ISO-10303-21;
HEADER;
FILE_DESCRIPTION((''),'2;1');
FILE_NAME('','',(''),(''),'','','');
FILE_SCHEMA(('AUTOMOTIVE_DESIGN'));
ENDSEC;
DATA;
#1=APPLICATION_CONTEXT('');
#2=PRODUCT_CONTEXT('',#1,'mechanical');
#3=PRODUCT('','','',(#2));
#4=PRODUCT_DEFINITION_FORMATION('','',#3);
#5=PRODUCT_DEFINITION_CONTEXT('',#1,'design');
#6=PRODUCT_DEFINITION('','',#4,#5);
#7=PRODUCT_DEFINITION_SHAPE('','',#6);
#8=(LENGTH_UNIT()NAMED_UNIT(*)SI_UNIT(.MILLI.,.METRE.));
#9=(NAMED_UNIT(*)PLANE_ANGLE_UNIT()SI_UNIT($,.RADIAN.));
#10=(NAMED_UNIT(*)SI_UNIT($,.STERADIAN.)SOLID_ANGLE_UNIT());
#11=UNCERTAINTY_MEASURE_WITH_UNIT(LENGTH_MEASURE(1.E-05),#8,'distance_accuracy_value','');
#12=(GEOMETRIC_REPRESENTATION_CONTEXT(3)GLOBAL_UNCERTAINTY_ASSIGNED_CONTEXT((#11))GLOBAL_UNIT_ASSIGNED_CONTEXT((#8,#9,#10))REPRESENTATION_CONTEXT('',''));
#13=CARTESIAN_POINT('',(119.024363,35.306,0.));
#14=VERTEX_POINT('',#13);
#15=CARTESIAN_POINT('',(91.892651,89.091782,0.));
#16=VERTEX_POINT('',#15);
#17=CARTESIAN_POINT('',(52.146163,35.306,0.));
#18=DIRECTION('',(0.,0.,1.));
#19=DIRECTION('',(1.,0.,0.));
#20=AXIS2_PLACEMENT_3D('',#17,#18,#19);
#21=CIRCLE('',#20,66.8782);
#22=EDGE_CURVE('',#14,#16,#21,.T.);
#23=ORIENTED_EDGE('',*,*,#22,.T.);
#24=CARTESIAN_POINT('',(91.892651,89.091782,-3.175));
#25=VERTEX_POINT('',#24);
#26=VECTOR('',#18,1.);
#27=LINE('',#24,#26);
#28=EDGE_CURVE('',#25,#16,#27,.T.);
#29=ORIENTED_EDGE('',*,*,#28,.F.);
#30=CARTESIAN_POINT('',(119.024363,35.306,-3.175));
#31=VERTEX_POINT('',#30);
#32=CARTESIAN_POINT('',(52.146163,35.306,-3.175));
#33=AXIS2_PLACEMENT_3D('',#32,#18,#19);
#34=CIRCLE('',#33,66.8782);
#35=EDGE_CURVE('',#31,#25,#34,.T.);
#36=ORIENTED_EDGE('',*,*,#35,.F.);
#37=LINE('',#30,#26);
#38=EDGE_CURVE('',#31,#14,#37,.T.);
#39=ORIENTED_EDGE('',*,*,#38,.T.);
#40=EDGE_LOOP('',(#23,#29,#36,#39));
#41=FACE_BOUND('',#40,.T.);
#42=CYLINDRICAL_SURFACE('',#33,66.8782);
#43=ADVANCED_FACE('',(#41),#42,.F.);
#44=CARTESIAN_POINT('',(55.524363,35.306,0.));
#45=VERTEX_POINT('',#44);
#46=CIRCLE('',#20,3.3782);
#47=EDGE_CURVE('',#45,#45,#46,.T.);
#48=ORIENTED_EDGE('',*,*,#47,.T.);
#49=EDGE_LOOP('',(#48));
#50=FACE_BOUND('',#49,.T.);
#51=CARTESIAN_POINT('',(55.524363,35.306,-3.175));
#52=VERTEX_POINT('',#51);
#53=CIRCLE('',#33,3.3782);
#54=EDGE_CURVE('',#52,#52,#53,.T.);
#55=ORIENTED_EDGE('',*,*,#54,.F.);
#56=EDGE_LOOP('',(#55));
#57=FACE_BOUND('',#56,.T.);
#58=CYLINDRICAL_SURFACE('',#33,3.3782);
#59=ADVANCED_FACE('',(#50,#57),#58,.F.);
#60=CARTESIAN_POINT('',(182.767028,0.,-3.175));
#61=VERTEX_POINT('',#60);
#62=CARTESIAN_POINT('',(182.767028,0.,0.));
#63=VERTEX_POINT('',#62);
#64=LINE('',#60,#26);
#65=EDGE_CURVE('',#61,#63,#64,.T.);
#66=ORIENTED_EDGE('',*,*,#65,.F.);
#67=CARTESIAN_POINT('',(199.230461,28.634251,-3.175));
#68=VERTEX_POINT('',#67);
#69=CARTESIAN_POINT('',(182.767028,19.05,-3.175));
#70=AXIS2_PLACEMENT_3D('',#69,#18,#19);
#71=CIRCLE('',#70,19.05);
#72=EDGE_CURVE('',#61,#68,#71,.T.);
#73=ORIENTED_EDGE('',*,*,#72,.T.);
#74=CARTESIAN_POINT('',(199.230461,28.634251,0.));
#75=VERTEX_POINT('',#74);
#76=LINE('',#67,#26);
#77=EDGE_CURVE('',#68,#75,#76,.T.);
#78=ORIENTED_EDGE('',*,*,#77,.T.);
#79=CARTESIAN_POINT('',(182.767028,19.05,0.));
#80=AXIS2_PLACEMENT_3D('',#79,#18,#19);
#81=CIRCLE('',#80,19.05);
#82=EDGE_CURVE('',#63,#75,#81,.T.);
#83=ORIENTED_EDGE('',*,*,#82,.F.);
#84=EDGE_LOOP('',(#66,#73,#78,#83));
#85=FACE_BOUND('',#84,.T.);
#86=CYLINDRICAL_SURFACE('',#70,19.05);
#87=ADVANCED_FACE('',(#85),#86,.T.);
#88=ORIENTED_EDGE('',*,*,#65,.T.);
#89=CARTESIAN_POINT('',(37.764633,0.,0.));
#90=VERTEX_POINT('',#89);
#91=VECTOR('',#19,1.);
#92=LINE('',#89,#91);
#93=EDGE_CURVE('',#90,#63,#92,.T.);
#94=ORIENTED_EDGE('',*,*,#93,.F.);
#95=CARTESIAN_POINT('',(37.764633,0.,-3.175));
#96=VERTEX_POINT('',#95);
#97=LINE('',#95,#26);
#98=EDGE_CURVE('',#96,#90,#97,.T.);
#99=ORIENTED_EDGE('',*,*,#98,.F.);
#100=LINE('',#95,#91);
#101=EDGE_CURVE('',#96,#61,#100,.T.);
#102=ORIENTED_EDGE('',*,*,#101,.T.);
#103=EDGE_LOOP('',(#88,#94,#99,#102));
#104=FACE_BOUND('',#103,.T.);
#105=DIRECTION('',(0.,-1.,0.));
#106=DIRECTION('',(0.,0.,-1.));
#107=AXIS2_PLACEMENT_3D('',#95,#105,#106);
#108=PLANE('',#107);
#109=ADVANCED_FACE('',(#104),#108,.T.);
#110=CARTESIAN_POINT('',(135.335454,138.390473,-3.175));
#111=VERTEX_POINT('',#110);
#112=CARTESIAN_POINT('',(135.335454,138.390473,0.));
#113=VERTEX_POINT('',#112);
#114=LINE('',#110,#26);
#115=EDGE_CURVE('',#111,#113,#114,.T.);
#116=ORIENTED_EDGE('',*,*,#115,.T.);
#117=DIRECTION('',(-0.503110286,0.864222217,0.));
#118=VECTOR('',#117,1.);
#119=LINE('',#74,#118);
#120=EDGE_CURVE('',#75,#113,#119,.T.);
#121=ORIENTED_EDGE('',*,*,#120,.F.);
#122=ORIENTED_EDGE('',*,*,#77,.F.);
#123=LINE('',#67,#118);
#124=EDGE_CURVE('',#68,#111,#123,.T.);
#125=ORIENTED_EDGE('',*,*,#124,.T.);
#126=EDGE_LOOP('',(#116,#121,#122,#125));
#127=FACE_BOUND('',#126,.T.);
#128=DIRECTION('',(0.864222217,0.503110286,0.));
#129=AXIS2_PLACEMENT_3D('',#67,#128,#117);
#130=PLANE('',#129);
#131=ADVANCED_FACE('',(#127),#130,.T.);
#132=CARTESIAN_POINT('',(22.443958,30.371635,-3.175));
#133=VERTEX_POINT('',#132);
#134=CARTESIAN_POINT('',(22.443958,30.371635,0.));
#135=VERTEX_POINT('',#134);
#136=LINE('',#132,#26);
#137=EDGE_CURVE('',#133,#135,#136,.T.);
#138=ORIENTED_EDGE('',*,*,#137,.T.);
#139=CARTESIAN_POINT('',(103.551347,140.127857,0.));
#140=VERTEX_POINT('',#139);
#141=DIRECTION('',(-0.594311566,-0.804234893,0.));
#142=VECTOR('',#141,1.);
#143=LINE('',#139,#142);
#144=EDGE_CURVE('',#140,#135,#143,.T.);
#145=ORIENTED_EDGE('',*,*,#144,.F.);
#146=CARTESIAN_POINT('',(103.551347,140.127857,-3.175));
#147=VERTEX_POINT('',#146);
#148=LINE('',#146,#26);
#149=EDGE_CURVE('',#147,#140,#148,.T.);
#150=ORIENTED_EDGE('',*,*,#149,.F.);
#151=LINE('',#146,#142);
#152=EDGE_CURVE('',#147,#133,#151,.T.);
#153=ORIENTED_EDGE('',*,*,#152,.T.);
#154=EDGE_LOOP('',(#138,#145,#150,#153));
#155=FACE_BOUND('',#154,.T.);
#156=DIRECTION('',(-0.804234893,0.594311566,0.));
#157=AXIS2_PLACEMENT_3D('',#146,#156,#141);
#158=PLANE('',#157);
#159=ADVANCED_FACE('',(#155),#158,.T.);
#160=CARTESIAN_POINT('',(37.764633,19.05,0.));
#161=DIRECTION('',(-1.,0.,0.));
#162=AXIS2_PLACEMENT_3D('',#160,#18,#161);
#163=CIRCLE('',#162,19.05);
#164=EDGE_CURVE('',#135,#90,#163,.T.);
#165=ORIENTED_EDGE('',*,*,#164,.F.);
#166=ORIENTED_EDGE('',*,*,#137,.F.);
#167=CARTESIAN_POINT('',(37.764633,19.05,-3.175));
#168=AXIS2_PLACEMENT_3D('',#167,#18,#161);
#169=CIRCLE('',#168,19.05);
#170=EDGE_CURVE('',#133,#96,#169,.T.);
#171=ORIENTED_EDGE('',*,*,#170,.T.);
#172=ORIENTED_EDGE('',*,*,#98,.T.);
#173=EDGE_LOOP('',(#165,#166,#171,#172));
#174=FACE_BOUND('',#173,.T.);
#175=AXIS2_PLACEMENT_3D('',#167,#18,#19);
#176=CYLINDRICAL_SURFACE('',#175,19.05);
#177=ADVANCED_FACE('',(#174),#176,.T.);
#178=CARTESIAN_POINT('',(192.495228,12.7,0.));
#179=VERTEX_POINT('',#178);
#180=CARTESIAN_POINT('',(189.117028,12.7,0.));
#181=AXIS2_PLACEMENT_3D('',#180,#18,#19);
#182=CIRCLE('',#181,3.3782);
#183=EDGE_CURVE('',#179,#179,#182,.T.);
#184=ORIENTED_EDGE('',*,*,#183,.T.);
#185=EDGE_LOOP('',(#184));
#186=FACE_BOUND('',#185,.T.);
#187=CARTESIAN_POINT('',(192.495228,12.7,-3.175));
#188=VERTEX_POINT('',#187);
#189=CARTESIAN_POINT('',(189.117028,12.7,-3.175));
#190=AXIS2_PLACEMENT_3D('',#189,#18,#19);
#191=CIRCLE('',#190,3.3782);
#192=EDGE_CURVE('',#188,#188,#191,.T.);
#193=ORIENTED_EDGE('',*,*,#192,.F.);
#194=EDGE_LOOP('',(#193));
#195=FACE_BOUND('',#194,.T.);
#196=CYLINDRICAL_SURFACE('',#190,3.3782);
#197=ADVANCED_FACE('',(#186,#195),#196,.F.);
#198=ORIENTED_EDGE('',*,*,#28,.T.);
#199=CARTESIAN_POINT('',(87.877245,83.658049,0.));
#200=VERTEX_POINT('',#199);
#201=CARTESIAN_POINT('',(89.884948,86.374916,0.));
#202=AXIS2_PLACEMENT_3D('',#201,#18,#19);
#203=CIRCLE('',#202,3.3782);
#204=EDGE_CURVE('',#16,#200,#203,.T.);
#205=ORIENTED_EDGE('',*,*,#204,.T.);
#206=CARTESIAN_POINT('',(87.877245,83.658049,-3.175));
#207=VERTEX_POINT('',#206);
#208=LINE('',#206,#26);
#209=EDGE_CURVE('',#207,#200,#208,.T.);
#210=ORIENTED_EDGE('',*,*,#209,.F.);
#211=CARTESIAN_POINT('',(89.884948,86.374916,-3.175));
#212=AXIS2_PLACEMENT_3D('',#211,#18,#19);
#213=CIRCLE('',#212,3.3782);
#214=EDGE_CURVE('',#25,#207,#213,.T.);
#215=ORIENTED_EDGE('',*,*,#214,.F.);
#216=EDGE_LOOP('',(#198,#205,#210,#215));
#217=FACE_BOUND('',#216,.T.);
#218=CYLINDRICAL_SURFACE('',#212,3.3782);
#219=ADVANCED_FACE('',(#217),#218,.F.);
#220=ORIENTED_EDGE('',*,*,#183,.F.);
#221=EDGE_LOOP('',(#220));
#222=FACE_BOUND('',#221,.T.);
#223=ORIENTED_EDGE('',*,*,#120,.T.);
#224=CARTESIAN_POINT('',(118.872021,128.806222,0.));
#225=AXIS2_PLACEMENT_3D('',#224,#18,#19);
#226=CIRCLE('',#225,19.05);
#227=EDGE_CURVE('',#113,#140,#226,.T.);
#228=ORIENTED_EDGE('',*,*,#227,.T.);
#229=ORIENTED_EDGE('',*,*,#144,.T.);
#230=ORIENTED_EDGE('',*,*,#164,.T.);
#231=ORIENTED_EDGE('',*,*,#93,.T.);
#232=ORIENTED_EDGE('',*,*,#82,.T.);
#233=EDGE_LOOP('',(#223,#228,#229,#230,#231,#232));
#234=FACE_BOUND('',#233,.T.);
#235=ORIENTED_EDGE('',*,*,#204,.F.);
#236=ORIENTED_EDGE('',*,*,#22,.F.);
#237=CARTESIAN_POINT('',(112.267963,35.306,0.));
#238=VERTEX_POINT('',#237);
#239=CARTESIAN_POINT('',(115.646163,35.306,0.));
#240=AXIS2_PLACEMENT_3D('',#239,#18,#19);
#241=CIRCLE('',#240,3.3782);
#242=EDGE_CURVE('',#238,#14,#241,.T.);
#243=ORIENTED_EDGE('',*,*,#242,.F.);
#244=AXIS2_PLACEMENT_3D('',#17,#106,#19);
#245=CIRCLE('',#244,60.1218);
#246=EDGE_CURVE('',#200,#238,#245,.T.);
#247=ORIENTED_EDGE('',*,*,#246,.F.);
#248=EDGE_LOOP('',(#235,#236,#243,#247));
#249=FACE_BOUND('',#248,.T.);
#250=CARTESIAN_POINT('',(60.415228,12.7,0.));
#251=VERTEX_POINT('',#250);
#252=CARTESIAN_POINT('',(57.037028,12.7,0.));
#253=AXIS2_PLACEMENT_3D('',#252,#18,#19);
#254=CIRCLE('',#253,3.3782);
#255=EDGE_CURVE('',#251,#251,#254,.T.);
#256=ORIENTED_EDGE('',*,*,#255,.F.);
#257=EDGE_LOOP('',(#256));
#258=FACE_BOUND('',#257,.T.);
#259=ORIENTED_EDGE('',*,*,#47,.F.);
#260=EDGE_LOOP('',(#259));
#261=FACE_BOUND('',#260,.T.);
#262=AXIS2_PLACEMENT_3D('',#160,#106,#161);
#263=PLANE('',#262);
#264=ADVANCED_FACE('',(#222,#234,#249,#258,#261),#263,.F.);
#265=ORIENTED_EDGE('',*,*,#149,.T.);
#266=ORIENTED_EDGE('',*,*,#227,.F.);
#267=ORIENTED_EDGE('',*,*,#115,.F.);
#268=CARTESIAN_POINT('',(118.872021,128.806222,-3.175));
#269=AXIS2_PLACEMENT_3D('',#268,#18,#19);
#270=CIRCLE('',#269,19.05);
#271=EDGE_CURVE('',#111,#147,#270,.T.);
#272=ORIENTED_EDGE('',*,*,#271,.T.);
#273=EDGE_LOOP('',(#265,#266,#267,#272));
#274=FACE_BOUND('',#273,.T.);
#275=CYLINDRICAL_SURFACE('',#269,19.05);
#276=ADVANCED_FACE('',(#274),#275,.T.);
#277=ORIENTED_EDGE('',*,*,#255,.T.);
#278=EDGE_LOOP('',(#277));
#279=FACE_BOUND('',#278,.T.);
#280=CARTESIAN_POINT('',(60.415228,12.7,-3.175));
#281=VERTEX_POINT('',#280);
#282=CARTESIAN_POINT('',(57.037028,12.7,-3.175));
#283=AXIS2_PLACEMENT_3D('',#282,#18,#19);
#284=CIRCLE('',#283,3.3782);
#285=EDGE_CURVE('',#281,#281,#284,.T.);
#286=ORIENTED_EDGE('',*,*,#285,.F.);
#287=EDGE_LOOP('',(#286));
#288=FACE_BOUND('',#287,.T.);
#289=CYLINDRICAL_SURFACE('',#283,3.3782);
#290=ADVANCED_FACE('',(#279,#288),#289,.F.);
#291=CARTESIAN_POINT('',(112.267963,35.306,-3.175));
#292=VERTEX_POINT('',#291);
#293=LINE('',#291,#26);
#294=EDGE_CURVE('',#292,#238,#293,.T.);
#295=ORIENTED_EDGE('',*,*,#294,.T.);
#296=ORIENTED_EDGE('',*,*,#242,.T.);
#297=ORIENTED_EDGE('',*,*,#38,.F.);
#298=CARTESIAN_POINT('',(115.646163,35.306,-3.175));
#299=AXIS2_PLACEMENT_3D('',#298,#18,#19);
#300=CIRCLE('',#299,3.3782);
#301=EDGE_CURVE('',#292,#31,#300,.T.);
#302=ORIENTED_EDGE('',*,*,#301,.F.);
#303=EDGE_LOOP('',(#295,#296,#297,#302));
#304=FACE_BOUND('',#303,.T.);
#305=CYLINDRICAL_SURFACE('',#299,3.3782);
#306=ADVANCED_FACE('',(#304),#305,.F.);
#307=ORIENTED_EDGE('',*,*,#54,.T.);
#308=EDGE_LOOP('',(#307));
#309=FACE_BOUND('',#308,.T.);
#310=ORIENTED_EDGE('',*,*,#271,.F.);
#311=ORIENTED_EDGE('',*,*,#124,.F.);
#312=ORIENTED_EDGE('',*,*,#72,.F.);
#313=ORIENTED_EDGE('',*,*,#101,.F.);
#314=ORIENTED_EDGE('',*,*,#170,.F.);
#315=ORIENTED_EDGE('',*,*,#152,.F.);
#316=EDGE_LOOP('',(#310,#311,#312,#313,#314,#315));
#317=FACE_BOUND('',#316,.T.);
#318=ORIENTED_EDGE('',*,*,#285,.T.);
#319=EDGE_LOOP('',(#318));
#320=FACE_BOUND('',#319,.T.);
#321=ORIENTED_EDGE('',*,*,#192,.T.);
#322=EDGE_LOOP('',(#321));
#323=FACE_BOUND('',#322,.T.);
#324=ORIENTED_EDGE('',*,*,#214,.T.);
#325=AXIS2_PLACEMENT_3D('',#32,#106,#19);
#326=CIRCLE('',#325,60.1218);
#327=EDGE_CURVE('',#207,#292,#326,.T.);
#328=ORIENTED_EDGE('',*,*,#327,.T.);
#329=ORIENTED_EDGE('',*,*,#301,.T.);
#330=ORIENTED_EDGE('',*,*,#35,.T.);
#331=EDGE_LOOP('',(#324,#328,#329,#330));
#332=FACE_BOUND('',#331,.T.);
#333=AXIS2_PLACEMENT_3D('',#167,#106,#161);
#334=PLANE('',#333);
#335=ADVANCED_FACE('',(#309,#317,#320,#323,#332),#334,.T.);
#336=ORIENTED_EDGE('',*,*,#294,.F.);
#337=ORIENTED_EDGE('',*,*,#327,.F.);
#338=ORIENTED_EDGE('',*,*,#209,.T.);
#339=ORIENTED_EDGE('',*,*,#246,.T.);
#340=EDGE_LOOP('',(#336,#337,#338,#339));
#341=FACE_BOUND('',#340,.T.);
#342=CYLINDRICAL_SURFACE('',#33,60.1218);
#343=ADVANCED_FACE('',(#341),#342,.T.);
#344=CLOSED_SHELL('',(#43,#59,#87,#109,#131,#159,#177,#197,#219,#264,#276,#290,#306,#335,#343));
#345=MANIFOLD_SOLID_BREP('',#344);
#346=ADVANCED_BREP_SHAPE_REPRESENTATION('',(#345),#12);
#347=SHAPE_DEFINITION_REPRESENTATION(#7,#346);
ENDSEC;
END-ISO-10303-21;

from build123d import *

# Parameters (mm, degrees)
BASE_FLANGE1_DEPTH = 3.175
SKETCH6_R          = 3.3782
CUT_EXTRUDE1_DEPTH = 251.203228354
SKETCH7_R          = 3.3782
CUT_EXTRUDE2_DEPTH = 251.203228354


# Sheet-metal steps are written as plain solids
with BuildPart() as part:
    # Sketch1 → Base-Flange1 (new body)
    with BuildSketch(Plane.XY):
        with BuildLine():
            Line((37.764632708, 0), (182.767027516, 0))
            ThreePointArc((182.767027516, 0), (199.281906874, 9.554671686), (199.230460753, 28.63425094))
            Line((199.230460753, 28.63425094), (135.335454487, 138.390472515))
            ThreePointArc((135.335454487, 138.390472515), (119.911781029, 147.827825072), (103.551346546, 140.127856906))
            Line((103.551346546, 140.127856906), (22.443958003, 30.371635332))
            ThreePointArc((22.443958003, 30.371635332), (20.756110534, 10.470217167), (37.764632708, 0))
        make_face()
    extrude(amount=-BASE_FLANGE1_DEPTH)

    # Sketch6 → Cut-Extrude1 (cut, through all)
    with BuildSketch(Plane.XY):
        with Locations((52.14616343, 35.306)):
            Circle(SKETCH6_R)
        with BuildLine():
            ThreePointArc((119.02436343, 35.306), (111.857415274, 65.4267576), (91.892651201, 89.091781998))
            ThreePointArc((91.892651201, 89.091781998), (87.168081554, 88.382619016), (87.877244536, 83.658049369))
            ThreePointArc((87.877244536, 83.658049369), (105.82505941, 62.383794622), (112.26796343, 35.306))
            ThreePointArc((112.26796343, 35.306), (115.64616343, 31.9278), (119.02436343, 35.306))
        make_face()
    extrude(amount=-CUT_EXTRUDE1_DEPTH, mode=Mode.SUBTRACT)

    # Sketch7 → Cut-Extrude2 (cut, through all)
    with BuildSketch(Plane.XY):
        with Locations((57.037027516, 12.7)):
            Circle(SKETCH7_R)
        with Locations((189.117027516, 12.7)):
            Circle(SKETCH7_R)
    extrude(amount=-CUT_EXTRUDE2_DEPTH, mode=Mode.SUBTRACT)


solid = part.part
